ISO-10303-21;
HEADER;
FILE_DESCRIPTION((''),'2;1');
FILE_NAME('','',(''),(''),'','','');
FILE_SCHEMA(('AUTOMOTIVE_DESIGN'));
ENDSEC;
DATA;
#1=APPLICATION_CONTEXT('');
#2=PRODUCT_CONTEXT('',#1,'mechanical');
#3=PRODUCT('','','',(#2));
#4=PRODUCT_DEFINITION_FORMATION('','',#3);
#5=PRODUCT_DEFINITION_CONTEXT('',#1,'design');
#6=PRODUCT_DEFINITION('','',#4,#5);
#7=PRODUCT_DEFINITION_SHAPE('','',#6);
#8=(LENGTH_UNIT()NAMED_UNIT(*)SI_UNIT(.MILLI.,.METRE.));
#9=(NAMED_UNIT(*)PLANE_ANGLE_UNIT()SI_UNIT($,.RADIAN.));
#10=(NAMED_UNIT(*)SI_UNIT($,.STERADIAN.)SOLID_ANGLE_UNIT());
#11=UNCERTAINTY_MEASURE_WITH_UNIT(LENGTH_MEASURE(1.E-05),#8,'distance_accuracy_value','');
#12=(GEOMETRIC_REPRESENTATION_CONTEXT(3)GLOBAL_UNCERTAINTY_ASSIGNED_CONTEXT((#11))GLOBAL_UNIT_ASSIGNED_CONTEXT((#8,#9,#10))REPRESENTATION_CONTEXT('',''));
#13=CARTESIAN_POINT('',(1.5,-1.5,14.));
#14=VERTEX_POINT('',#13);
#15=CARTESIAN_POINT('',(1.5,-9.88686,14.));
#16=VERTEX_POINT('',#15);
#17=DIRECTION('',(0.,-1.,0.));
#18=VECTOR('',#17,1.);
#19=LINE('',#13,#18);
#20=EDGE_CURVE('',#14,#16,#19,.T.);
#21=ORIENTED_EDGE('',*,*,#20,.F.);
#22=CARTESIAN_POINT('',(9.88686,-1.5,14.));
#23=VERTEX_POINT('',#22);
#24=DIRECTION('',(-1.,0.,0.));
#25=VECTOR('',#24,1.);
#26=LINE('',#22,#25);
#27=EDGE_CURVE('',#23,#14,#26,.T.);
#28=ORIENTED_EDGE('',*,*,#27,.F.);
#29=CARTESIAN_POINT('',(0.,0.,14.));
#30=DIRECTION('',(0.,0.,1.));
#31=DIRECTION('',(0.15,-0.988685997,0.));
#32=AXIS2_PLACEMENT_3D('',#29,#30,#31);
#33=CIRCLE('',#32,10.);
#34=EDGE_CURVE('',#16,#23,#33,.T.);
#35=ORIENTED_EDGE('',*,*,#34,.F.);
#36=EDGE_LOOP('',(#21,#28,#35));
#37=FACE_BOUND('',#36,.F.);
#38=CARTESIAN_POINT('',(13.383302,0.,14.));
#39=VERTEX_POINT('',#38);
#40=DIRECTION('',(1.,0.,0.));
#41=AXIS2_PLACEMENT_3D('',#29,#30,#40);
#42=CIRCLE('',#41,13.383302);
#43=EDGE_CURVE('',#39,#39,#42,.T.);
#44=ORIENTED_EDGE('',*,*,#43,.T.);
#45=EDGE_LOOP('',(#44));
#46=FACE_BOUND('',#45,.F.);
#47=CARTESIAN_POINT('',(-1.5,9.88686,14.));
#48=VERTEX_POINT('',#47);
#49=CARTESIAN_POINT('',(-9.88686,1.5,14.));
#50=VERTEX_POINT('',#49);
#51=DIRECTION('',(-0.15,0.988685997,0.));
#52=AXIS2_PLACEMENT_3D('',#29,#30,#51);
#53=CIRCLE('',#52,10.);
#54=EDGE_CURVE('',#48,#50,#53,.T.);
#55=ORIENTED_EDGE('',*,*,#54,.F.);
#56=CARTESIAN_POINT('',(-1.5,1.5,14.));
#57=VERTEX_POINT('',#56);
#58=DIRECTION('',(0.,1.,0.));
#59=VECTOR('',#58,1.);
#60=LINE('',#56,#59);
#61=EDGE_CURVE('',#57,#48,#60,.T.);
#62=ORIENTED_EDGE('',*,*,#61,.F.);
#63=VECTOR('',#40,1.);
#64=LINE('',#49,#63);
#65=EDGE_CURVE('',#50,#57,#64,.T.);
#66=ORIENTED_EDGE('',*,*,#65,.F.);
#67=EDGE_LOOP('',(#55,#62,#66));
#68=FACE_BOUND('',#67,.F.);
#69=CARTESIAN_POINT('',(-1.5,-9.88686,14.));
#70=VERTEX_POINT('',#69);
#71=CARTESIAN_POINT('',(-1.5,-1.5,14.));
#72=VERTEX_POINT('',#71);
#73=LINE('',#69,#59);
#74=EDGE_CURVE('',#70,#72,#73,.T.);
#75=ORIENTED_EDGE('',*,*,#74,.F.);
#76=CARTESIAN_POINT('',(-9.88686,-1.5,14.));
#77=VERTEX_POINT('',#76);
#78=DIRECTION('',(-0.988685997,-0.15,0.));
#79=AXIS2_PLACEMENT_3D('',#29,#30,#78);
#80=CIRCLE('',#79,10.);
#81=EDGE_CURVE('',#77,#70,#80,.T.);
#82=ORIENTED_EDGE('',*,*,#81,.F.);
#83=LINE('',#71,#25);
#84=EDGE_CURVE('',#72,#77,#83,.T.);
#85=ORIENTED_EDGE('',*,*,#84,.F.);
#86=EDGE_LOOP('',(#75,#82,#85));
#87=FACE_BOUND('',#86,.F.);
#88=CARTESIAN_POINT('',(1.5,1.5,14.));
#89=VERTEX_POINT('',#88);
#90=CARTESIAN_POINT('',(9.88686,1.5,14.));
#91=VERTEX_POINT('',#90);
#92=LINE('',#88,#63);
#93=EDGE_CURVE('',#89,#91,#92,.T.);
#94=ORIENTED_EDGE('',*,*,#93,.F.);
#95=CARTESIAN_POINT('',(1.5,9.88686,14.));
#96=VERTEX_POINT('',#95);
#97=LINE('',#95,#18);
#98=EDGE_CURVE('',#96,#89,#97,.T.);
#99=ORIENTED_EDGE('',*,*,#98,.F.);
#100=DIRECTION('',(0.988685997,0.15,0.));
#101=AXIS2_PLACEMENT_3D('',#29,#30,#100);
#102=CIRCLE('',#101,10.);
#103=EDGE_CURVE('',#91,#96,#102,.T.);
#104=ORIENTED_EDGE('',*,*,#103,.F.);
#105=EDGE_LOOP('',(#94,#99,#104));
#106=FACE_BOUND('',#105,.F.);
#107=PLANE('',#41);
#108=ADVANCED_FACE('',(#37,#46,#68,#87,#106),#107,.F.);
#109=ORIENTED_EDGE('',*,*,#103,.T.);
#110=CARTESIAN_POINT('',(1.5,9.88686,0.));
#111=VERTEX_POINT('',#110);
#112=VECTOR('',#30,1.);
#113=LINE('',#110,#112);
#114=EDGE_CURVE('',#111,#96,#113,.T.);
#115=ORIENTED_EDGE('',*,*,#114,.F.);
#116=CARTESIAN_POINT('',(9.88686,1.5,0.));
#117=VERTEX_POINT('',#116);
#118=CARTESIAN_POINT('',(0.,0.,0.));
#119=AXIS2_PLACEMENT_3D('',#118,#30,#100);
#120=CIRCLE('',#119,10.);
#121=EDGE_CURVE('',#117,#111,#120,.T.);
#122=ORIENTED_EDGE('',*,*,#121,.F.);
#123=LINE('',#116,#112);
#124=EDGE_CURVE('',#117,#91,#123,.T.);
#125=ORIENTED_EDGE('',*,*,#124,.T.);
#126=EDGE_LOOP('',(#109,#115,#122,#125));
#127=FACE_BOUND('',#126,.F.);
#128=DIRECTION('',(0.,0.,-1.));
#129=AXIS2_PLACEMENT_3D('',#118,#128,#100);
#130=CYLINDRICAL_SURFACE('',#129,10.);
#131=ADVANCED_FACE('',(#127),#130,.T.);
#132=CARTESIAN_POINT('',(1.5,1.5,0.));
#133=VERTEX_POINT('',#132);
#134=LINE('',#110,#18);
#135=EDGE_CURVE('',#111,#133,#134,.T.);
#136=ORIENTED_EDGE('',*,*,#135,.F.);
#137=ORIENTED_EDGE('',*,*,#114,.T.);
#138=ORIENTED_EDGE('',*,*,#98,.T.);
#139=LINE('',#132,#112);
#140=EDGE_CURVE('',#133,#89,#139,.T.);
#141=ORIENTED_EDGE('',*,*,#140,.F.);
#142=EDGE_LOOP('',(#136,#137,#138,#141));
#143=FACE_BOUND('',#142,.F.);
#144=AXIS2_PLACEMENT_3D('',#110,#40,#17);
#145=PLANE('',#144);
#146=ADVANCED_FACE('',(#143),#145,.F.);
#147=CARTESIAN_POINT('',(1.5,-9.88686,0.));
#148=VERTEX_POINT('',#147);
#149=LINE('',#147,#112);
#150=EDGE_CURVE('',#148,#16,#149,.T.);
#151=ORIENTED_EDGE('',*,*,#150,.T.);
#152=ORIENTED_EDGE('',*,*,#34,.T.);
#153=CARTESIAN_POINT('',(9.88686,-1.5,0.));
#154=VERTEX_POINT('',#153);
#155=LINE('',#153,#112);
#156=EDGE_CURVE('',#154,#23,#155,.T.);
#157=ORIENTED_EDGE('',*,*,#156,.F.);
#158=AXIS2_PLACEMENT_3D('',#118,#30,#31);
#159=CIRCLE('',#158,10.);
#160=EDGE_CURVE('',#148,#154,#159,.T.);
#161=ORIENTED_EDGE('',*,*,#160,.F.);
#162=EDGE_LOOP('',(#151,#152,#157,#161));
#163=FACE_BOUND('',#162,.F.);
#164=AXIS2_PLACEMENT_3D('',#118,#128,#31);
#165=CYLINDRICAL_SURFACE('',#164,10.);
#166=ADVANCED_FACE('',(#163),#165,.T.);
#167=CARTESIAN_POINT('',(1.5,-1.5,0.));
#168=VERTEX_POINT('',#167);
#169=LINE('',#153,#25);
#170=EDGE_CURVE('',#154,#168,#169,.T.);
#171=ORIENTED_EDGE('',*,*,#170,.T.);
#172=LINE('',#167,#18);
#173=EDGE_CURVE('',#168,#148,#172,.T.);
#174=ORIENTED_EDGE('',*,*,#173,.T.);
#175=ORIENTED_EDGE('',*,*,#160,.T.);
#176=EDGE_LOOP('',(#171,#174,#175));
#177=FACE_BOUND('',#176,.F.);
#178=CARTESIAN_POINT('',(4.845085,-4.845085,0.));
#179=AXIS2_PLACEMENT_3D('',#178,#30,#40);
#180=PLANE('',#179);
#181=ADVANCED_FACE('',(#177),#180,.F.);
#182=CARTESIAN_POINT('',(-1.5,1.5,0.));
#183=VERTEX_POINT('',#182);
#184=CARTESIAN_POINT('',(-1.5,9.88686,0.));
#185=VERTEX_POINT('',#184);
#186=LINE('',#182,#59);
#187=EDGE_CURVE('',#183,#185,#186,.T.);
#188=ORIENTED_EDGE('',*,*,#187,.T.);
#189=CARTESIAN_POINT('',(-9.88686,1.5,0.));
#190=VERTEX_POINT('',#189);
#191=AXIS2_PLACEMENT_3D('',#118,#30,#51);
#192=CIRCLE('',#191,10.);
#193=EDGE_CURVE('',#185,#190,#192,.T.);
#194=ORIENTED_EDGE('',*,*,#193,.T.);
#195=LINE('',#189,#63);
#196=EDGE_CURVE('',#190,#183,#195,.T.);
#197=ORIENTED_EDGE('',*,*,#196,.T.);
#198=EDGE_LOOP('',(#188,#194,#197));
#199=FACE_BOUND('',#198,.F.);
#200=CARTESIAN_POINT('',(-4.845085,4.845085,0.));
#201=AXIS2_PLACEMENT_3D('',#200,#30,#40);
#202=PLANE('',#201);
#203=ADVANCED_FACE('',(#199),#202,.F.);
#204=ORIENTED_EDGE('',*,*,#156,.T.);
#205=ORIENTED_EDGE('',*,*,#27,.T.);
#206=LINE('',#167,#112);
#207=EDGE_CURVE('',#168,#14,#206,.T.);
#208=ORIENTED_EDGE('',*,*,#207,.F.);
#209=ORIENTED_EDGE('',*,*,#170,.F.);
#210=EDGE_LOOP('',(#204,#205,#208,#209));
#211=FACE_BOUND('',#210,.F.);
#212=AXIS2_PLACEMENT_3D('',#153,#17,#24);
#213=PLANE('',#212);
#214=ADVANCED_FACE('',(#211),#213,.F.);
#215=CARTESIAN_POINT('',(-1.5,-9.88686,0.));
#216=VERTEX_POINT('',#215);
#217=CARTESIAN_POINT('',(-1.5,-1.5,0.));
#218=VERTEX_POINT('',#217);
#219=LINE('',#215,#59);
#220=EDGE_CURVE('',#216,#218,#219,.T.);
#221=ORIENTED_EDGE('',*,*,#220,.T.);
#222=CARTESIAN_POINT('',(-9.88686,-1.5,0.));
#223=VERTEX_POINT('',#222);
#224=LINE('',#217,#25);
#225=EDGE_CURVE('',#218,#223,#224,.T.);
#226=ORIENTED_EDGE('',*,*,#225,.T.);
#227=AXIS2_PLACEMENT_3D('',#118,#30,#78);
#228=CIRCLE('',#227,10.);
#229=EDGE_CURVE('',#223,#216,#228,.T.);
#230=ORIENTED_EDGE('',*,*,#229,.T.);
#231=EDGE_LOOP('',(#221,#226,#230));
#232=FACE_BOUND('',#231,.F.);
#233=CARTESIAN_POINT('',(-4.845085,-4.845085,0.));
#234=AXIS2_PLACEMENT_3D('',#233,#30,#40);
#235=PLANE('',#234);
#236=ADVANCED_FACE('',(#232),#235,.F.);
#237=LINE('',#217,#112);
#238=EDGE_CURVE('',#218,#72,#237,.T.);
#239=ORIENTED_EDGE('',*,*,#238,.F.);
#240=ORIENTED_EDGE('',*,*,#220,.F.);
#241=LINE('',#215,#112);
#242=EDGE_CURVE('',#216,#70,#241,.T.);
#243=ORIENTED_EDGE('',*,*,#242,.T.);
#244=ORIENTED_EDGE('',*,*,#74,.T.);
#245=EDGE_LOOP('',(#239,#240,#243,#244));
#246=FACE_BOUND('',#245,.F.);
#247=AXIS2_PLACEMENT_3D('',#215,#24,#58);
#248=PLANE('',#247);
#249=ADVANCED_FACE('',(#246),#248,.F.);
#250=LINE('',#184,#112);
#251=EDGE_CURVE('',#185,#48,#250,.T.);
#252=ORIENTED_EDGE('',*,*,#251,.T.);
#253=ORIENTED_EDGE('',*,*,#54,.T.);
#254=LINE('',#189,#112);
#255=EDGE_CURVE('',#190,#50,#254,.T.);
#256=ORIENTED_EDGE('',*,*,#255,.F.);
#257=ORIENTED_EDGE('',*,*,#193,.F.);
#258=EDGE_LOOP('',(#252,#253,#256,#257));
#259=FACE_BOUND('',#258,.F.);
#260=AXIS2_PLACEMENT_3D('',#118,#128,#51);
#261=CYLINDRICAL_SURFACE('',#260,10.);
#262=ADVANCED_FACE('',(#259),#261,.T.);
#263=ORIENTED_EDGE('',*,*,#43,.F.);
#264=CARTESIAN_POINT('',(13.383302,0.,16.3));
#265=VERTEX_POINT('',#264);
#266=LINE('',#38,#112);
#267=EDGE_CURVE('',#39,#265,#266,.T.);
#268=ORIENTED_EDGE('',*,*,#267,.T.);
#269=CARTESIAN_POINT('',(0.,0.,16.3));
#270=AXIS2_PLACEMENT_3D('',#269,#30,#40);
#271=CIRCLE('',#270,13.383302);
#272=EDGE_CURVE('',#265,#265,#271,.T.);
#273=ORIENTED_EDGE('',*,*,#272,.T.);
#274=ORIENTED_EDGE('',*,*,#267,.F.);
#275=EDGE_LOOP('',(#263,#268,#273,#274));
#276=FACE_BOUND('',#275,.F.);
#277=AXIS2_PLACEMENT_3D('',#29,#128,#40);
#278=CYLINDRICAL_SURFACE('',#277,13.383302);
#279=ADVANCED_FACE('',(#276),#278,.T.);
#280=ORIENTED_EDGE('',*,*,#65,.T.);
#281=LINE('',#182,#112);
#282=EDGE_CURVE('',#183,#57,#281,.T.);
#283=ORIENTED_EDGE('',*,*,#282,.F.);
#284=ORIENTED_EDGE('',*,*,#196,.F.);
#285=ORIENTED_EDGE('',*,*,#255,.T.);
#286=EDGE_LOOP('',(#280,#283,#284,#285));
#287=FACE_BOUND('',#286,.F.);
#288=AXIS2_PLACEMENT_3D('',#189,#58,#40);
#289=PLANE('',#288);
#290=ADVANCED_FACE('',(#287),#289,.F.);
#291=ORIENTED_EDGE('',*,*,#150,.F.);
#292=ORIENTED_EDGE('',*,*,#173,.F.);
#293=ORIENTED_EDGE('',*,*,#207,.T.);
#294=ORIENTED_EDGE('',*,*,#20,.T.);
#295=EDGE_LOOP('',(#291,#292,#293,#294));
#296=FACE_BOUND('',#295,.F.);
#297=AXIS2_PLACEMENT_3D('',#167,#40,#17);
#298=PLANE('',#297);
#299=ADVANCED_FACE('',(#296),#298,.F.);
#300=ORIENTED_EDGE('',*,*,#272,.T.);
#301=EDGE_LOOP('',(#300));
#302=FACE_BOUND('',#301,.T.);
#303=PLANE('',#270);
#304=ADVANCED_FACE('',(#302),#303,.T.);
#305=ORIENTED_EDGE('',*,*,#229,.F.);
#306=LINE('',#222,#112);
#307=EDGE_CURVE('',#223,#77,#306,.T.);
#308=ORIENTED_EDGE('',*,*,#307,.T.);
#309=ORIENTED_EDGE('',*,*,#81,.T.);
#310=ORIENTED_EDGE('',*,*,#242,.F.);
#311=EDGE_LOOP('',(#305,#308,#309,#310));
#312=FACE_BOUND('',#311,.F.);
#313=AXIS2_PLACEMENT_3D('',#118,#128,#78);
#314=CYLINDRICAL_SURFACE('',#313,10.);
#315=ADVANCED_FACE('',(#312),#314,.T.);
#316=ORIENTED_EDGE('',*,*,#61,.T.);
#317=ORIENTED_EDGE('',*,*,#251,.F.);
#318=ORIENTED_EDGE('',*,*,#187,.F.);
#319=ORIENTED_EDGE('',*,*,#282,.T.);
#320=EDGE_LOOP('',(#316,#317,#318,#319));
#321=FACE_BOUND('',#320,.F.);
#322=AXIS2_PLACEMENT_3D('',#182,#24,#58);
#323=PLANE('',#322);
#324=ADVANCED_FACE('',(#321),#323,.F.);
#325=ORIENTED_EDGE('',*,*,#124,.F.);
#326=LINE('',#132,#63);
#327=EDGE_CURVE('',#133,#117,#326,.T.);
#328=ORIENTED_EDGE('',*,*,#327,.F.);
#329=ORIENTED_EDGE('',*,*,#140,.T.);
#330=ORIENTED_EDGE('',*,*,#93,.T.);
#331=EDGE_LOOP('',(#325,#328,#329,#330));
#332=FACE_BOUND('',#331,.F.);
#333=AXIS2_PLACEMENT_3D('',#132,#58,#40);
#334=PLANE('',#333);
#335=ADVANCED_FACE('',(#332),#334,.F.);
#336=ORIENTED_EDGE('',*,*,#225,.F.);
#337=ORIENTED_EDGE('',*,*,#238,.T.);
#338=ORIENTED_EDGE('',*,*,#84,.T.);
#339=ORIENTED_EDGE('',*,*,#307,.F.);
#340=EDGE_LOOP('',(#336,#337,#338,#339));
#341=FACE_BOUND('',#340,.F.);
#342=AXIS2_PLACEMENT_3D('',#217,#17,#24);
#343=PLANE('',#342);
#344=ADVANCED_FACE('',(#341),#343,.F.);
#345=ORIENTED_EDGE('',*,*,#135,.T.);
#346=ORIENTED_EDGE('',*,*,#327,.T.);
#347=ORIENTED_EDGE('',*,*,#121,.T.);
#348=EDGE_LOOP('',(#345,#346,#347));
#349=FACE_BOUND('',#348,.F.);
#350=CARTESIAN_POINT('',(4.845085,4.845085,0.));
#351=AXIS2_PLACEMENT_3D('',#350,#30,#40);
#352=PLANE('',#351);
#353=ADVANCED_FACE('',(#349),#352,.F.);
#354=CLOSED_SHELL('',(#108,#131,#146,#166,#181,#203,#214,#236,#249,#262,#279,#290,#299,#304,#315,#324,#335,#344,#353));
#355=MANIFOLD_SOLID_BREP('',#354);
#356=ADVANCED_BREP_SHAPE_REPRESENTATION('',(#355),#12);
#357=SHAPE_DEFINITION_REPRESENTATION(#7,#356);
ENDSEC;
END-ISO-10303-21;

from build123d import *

# Parameters (mm, degrees)
F1_DEPTH = 14
F2_R     = 13.3833019173
F3_DEPTH = 2.3


with BuildPart() as f1:
    # F0 (on Top) → F1 (new body)
    with BuildSketch(Plane.XY):
        with BuildLine():
            Line((1.5, 1.5), (9.8868599666, 1.5))
            ThreePointArc((9.8868599666, 1.5), (7.0710678119, 7.0710678119), (1.5, 9.8868599666))
            Line((1.5, 9.8868599666), (1.5, 1.5))
        make_face()
    extrude(amount=F1_DEPTH)



with BuildPart() as f1b:
    # F0 (on Top) → F1, piece 2 (new body)
    with BuildSketch(Plane.XY):
        with BuildLine():
            ThreePointArc((1.5, -9.8868599666), (7.0710678119, -7.0710678119), (9.8868599666, -1.5))
            Line((9.8868599666, -1.5), (1.5, -1.5))
            Line((1.5, -1.5), (1.5, -9.8868599666))
        make_face()
    extrude(amount=F1_DEPTH)


with BuildPart() as f1c:
    # F0 (on Top) → F1, piece 3 (new body)
    with BuildSketch(Plane.XY):
        with BuildLine():
            Line((-1.5, 1.5), (-1.5, 9.8868599666))
            ThreePointArc((-1.5, 9.8868599666), (-7.0710678119, 7.0710678119), (-9.8868599666, 1.5))
            Line((-9.8868599666, 1.5), (-1.5, 1.5))
        make_face()
    extrude(amount=F1_DEPTH)


with BuildPart() as f1d:
    # F0 (on Top) → F1, piece 4 (new body)
    with BuildSketch(Plane.XY):
        with BuildLine():
            ThreePointArc((-9.8868599666, -1.5), (-7.0710678119, -7.0710678119), (-1.5, -9.8868599666))
            Line((-1.5, -9.8868599666), (-1.5, -1.5))
            Line((-1.5, -1.5), (-9.8868599666, -1.5))
        make_face()
    extrude(amount=F1_DEPTH)


with BuildPart() as f1_1:
    add(f1.part)

    add(f1b.part)  # F3 merges F1b

    add(f1c.part)  # F3 merges F1c

    add(f1d.part)  # F3 merges F1d
    # F2 (on face) → F3 (join)
    with BuildSketch(Plane.XY.offset(14)):
        Circle(F2_R)
        with BuildLine():
            Line((-1.5, 1.5), (-9.8868599666, 1.5))
            ThreePointArc((-9.8868599666, 1.5), (-7.0710678119, 7.0710678119), (-1.5, 9.8868599666))
            Line((-1.5, 9.8868599666), (-1.5, 1.5))
        make_face(mode=Mode.SUBTRACT)
        with BuildLine():
            ThreePointArc((-1.5, 9.8868599666), (-7.0710678119, 7.0710678119), (-9.8868599666, 1.5))
            Line((-9.8868599666, 1.5), (-1.5, 1.5))
            Line((-1.5, 1.5), (-1.5, 9.8868599666))
        make_face()
    extrude(amount=F3_DEPTH)


solid = f1_1.part
